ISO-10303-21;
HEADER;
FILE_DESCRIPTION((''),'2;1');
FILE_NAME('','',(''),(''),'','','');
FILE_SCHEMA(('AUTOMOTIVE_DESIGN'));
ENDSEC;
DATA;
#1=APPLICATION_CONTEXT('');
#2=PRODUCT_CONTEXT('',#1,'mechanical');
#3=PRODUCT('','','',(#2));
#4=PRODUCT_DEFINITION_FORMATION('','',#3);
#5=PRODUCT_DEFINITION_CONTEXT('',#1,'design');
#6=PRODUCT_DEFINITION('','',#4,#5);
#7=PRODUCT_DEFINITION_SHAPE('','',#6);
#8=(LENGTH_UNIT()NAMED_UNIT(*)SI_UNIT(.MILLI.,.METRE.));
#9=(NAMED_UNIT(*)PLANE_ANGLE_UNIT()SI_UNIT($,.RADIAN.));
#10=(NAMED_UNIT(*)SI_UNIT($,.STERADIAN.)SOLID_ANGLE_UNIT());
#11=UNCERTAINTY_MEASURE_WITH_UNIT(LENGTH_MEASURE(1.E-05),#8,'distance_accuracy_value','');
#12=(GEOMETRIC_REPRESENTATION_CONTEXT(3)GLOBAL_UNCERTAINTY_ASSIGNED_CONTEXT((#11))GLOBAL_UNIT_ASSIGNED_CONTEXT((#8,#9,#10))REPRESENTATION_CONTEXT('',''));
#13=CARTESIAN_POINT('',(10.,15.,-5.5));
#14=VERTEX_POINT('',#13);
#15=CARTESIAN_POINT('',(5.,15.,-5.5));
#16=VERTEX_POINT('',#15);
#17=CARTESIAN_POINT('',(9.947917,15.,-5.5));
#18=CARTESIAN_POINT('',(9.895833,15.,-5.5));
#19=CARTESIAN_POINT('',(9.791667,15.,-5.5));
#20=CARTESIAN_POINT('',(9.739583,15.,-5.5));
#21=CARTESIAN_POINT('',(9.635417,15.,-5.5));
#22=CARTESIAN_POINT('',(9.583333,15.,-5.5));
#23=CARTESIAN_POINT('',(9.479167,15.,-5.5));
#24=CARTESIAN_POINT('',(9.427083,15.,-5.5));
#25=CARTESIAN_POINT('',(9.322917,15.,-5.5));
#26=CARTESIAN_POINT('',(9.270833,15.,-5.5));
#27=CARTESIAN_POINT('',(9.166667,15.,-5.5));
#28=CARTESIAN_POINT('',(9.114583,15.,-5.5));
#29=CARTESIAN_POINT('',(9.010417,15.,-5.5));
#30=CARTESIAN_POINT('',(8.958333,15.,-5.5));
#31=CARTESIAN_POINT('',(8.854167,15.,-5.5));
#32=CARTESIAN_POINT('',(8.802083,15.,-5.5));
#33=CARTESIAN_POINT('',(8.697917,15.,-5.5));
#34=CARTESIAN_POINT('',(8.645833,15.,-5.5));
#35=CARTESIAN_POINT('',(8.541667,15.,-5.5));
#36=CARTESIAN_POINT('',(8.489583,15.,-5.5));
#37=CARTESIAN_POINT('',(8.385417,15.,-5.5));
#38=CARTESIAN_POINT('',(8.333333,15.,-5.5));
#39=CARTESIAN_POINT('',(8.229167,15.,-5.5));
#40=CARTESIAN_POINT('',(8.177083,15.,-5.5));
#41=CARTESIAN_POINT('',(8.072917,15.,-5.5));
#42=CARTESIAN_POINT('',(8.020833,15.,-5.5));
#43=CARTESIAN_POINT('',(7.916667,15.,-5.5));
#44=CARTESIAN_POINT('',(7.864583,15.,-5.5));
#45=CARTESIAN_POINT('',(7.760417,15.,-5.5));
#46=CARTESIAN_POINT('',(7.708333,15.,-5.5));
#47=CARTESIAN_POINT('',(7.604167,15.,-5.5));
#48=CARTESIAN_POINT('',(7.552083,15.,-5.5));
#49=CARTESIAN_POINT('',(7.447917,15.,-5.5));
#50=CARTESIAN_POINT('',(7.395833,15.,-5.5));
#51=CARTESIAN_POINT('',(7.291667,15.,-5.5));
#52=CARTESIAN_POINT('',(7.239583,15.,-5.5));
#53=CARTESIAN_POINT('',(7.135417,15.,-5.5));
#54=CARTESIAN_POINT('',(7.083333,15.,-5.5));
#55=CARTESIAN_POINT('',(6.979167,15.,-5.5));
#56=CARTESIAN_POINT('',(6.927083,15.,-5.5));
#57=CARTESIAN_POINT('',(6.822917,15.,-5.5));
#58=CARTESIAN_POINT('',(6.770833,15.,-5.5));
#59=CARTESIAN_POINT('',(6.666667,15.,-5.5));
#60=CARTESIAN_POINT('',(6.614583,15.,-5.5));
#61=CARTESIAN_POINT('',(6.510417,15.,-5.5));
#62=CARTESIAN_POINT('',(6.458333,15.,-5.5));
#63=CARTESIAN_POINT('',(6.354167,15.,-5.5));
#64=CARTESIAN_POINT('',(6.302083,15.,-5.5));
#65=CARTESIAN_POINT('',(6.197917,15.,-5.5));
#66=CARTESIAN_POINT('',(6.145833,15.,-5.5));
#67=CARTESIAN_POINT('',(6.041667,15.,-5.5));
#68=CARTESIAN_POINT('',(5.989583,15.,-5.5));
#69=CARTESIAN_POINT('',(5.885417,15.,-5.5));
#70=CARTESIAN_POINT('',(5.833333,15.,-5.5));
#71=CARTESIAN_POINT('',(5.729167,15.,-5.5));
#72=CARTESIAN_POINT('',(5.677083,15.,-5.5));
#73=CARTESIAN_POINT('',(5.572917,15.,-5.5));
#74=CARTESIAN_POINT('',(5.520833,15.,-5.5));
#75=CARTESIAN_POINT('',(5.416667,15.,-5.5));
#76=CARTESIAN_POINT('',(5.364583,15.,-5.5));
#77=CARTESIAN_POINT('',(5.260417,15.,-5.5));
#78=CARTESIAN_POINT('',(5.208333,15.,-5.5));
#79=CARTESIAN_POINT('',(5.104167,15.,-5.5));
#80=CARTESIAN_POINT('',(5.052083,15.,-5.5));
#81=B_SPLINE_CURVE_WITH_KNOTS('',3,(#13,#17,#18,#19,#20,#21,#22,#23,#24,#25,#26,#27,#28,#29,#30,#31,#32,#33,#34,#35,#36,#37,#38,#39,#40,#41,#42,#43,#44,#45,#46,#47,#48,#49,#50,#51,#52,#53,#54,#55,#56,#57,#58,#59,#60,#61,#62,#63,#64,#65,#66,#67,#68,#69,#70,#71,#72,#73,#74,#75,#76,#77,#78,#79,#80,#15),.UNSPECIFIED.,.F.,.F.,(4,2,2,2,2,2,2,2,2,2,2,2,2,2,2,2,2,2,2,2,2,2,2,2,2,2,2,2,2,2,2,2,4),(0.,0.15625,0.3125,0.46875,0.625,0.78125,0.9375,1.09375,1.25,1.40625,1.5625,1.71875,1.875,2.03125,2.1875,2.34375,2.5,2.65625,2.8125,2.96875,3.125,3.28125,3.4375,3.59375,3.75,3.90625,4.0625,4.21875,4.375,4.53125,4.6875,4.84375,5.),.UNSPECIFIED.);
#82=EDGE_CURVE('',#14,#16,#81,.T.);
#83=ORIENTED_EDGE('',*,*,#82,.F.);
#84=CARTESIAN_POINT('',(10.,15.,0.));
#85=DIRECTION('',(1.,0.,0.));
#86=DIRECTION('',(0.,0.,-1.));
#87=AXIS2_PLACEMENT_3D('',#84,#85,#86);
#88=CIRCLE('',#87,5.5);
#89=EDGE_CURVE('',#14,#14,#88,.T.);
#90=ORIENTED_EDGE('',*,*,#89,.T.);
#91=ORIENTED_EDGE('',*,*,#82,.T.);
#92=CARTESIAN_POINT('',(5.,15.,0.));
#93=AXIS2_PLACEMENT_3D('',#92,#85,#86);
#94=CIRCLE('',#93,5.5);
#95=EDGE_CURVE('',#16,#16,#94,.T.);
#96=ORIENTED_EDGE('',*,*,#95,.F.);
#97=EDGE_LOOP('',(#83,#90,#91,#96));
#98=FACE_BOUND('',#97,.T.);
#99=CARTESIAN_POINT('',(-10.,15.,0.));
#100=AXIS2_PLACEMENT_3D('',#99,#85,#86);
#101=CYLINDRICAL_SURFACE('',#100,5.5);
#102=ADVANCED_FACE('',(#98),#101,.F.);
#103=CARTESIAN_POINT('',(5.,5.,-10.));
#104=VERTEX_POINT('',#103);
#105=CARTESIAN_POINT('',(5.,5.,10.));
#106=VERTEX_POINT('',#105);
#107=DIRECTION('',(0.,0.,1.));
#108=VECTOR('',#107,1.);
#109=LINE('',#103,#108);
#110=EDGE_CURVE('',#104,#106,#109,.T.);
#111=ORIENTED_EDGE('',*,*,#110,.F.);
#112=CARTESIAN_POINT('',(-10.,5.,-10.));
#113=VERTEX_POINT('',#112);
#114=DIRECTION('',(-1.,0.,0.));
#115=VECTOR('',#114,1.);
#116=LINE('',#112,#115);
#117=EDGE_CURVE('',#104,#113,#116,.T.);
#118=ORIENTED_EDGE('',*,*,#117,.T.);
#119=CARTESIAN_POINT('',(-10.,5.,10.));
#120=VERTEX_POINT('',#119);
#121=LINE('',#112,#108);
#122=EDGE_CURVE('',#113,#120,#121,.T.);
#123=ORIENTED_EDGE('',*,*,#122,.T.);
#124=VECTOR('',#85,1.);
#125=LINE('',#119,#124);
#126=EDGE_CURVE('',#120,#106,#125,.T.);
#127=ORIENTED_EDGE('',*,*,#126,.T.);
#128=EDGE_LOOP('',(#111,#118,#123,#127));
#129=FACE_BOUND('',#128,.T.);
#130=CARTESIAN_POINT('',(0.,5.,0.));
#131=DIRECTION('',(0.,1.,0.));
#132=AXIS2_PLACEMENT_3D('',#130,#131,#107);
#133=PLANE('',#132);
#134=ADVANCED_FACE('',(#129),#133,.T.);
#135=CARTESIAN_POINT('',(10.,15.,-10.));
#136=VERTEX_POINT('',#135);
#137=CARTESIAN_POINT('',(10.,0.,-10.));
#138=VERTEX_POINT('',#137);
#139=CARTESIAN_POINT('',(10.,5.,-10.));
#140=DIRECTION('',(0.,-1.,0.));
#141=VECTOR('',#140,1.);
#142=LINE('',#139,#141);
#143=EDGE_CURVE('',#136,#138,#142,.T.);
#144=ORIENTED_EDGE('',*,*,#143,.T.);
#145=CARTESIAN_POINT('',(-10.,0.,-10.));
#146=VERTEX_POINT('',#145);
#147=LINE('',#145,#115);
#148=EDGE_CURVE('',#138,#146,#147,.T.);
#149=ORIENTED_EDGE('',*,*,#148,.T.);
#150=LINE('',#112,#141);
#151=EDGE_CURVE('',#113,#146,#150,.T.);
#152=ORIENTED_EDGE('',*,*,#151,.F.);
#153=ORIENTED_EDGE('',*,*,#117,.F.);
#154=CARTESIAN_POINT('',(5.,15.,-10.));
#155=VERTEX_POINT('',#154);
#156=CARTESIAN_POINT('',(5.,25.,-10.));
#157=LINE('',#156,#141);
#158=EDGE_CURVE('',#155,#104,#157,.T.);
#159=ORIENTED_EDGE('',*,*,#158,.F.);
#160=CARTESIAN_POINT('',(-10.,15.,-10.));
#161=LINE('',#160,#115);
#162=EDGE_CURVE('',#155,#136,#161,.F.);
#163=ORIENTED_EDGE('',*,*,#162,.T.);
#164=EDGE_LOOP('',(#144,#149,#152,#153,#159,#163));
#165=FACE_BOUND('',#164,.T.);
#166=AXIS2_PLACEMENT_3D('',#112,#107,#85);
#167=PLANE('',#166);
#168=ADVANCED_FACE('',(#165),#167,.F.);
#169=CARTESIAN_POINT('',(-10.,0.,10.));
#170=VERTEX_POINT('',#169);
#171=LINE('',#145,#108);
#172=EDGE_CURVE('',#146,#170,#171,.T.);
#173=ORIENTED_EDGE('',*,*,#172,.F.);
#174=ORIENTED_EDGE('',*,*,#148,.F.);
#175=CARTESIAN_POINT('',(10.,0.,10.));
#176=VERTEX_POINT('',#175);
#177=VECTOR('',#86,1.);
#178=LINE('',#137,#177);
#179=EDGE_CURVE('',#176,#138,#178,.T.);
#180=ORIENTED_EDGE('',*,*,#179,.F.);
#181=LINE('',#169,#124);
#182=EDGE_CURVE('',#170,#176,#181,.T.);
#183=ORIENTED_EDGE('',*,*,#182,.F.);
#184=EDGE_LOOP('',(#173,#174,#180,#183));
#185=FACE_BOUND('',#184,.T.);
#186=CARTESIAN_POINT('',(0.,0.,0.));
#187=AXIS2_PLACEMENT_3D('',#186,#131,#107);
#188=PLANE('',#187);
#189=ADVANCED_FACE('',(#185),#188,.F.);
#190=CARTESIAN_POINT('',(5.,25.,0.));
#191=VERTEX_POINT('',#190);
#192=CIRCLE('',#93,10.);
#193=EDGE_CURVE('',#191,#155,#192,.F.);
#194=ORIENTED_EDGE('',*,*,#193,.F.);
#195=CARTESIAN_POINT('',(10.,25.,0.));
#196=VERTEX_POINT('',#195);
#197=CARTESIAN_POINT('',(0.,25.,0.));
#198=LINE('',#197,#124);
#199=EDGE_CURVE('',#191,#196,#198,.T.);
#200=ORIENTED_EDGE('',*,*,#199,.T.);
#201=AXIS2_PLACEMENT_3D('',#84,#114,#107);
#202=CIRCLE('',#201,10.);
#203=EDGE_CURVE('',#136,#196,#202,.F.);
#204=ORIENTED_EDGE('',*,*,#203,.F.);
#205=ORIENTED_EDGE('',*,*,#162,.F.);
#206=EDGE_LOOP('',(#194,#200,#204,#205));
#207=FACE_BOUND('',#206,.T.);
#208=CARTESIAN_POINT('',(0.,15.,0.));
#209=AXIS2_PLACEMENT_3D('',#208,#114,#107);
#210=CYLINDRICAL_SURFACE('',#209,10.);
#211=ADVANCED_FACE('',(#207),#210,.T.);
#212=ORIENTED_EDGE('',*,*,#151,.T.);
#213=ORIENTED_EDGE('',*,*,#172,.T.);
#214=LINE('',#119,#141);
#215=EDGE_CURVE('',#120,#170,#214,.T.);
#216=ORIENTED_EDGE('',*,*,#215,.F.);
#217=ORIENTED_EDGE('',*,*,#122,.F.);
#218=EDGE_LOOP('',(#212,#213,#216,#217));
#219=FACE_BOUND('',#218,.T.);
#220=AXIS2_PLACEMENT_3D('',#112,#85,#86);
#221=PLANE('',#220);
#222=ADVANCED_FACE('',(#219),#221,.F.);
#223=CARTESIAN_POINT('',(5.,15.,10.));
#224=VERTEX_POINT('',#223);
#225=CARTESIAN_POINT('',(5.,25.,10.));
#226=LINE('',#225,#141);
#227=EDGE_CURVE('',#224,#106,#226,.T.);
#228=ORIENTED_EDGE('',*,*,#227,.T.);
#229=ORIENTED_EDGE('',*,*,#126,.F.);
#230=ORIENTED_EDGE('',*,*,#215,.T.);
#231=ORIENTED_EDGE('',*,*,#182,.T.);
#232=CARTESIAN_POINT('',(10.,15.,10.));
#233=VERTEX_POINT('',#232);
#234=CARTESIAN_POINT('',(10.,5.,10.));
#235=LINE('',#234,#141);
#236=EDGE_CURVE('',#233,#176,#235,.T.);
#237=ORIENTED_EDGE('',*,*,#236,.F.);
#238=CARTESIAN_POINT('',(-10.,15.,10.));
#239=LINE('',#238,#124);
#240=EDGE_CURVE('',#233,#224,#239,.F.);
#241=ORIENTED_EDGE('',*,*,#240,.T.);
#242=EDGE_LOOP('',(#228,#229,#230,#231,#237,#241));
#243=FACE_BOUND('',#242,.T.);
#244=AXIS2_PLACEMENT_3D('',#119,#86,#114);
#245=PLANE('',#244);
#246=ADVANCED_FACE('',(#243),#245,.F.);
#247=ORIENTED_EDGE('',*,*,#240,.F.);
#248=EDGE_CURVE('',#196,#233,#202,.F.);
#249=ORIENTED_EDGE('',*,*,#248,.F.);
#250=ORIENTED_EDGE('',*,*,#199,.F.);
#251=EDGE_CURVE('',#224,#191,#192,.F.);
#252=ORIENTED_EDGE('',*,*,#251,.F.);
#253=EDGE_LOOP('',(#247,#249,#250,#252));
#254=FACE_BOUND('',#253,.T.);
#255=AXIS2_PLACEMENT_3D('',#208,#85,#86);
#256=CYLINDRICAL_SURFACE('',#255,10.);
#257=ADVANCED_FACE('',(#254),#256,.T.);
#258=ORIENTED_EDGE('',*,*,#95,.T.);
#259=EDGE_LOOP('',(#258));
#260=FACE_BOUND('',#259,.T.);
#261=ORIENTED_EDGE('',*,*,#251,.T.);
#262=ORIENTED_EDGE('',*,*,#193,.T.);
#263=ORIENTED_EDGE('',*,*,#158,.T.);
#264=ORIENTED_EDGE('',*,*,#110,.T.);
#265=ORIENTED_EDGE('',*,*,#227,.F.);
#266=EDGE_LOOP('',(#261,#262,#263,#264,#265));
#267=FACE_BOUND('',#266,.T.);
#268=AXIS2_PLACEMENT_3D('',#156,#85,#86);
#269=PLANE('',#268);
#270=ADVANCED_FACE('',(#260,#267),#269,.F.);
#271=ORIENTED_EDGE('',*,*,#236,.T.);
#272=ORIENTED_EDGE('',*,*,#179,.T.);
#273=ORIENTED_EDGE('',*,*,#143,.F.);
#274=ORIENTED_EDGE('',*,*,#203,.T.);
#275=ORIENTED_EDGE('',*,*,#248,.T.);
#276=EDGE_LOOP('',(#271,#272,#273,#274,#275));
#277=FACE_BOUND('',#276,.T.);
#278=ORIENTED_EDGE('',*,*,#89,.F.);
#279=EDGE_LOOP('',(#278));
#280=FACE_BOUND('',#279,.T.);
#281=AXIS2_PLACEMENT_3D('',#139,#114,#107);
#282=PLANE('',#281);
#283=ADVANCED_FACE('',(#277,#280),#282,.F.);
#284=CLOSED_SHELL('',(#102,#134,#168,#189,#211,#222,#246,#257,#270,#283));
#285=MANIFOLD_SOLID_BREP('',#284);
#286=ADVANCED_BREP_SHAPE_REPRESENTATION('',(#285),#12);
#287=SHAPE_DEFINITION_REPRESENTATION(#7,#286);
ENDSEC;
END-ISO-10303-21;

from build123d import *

# Parameters (mm, degrees)
SKETCH1_W           = 20
SKETCH1_H           = 20
BOSS_EXTRUDE1_DEPTH = 5
SKETCH2_W           = 5
SKETCH2_H           = 20
BOSS_EXTRUDE2_DEPTH = 20
SKETCH3_R           = 5.5
CUT_EXTRUDE1_DEPTH  = 34.541019662
FILLET1_R           = 10


with BuildPart() as part:
    # Sketch1 → Boss-Extrude1 (new body)
    with BuildSketch(Plane(origin=(0, 0, 0), x_dir=(1, 0, 0), z_dir=(0, 1, 0))):
        Rectangle(SKETCH1_W, SKETCH1_H)
    extrude(amount=BOSS_EXTRUDE1_DEPTH)

    # Sketch2 → Boss-Extrude2 (add)
    with BuildSketch(Plane(origin=(0, 5, 0), x_dir=(1, 0, 0), z_dir=(0, 1, 0))):
        with Locations((7.5, 0)):
            Rectangle(SKETCH2_W, SKETCH2_H)
    extrude(amount=BOSS_EXTRUDE2_DEPTH)

    # Sketch3 → Cut-Extrude1 (cut, through all)
    with BuildSketch(Plane(origin=(10, 0, 0), x_dir=(0, 0, -1), z_dir=(1, 0, 0))):
        with Locations((0, 15)):
            Circle(SKETCH3_R)
    extrude(amount=-CUT_EXTRUDE1_DEPTH, mode=Mode.SUBTRACT)

    # Fillet1
    fillet1_edges = [part.edges().sort_by_distance(p)[0] for p in [
        (7.5, 25, -10),
        (7.5, 25, 10),
    ]]
    fillet(fillet1_edges, radius=FILLET1_R - 0.0001)  # a hair under: the kernel refuses the full size


solid = part.part
